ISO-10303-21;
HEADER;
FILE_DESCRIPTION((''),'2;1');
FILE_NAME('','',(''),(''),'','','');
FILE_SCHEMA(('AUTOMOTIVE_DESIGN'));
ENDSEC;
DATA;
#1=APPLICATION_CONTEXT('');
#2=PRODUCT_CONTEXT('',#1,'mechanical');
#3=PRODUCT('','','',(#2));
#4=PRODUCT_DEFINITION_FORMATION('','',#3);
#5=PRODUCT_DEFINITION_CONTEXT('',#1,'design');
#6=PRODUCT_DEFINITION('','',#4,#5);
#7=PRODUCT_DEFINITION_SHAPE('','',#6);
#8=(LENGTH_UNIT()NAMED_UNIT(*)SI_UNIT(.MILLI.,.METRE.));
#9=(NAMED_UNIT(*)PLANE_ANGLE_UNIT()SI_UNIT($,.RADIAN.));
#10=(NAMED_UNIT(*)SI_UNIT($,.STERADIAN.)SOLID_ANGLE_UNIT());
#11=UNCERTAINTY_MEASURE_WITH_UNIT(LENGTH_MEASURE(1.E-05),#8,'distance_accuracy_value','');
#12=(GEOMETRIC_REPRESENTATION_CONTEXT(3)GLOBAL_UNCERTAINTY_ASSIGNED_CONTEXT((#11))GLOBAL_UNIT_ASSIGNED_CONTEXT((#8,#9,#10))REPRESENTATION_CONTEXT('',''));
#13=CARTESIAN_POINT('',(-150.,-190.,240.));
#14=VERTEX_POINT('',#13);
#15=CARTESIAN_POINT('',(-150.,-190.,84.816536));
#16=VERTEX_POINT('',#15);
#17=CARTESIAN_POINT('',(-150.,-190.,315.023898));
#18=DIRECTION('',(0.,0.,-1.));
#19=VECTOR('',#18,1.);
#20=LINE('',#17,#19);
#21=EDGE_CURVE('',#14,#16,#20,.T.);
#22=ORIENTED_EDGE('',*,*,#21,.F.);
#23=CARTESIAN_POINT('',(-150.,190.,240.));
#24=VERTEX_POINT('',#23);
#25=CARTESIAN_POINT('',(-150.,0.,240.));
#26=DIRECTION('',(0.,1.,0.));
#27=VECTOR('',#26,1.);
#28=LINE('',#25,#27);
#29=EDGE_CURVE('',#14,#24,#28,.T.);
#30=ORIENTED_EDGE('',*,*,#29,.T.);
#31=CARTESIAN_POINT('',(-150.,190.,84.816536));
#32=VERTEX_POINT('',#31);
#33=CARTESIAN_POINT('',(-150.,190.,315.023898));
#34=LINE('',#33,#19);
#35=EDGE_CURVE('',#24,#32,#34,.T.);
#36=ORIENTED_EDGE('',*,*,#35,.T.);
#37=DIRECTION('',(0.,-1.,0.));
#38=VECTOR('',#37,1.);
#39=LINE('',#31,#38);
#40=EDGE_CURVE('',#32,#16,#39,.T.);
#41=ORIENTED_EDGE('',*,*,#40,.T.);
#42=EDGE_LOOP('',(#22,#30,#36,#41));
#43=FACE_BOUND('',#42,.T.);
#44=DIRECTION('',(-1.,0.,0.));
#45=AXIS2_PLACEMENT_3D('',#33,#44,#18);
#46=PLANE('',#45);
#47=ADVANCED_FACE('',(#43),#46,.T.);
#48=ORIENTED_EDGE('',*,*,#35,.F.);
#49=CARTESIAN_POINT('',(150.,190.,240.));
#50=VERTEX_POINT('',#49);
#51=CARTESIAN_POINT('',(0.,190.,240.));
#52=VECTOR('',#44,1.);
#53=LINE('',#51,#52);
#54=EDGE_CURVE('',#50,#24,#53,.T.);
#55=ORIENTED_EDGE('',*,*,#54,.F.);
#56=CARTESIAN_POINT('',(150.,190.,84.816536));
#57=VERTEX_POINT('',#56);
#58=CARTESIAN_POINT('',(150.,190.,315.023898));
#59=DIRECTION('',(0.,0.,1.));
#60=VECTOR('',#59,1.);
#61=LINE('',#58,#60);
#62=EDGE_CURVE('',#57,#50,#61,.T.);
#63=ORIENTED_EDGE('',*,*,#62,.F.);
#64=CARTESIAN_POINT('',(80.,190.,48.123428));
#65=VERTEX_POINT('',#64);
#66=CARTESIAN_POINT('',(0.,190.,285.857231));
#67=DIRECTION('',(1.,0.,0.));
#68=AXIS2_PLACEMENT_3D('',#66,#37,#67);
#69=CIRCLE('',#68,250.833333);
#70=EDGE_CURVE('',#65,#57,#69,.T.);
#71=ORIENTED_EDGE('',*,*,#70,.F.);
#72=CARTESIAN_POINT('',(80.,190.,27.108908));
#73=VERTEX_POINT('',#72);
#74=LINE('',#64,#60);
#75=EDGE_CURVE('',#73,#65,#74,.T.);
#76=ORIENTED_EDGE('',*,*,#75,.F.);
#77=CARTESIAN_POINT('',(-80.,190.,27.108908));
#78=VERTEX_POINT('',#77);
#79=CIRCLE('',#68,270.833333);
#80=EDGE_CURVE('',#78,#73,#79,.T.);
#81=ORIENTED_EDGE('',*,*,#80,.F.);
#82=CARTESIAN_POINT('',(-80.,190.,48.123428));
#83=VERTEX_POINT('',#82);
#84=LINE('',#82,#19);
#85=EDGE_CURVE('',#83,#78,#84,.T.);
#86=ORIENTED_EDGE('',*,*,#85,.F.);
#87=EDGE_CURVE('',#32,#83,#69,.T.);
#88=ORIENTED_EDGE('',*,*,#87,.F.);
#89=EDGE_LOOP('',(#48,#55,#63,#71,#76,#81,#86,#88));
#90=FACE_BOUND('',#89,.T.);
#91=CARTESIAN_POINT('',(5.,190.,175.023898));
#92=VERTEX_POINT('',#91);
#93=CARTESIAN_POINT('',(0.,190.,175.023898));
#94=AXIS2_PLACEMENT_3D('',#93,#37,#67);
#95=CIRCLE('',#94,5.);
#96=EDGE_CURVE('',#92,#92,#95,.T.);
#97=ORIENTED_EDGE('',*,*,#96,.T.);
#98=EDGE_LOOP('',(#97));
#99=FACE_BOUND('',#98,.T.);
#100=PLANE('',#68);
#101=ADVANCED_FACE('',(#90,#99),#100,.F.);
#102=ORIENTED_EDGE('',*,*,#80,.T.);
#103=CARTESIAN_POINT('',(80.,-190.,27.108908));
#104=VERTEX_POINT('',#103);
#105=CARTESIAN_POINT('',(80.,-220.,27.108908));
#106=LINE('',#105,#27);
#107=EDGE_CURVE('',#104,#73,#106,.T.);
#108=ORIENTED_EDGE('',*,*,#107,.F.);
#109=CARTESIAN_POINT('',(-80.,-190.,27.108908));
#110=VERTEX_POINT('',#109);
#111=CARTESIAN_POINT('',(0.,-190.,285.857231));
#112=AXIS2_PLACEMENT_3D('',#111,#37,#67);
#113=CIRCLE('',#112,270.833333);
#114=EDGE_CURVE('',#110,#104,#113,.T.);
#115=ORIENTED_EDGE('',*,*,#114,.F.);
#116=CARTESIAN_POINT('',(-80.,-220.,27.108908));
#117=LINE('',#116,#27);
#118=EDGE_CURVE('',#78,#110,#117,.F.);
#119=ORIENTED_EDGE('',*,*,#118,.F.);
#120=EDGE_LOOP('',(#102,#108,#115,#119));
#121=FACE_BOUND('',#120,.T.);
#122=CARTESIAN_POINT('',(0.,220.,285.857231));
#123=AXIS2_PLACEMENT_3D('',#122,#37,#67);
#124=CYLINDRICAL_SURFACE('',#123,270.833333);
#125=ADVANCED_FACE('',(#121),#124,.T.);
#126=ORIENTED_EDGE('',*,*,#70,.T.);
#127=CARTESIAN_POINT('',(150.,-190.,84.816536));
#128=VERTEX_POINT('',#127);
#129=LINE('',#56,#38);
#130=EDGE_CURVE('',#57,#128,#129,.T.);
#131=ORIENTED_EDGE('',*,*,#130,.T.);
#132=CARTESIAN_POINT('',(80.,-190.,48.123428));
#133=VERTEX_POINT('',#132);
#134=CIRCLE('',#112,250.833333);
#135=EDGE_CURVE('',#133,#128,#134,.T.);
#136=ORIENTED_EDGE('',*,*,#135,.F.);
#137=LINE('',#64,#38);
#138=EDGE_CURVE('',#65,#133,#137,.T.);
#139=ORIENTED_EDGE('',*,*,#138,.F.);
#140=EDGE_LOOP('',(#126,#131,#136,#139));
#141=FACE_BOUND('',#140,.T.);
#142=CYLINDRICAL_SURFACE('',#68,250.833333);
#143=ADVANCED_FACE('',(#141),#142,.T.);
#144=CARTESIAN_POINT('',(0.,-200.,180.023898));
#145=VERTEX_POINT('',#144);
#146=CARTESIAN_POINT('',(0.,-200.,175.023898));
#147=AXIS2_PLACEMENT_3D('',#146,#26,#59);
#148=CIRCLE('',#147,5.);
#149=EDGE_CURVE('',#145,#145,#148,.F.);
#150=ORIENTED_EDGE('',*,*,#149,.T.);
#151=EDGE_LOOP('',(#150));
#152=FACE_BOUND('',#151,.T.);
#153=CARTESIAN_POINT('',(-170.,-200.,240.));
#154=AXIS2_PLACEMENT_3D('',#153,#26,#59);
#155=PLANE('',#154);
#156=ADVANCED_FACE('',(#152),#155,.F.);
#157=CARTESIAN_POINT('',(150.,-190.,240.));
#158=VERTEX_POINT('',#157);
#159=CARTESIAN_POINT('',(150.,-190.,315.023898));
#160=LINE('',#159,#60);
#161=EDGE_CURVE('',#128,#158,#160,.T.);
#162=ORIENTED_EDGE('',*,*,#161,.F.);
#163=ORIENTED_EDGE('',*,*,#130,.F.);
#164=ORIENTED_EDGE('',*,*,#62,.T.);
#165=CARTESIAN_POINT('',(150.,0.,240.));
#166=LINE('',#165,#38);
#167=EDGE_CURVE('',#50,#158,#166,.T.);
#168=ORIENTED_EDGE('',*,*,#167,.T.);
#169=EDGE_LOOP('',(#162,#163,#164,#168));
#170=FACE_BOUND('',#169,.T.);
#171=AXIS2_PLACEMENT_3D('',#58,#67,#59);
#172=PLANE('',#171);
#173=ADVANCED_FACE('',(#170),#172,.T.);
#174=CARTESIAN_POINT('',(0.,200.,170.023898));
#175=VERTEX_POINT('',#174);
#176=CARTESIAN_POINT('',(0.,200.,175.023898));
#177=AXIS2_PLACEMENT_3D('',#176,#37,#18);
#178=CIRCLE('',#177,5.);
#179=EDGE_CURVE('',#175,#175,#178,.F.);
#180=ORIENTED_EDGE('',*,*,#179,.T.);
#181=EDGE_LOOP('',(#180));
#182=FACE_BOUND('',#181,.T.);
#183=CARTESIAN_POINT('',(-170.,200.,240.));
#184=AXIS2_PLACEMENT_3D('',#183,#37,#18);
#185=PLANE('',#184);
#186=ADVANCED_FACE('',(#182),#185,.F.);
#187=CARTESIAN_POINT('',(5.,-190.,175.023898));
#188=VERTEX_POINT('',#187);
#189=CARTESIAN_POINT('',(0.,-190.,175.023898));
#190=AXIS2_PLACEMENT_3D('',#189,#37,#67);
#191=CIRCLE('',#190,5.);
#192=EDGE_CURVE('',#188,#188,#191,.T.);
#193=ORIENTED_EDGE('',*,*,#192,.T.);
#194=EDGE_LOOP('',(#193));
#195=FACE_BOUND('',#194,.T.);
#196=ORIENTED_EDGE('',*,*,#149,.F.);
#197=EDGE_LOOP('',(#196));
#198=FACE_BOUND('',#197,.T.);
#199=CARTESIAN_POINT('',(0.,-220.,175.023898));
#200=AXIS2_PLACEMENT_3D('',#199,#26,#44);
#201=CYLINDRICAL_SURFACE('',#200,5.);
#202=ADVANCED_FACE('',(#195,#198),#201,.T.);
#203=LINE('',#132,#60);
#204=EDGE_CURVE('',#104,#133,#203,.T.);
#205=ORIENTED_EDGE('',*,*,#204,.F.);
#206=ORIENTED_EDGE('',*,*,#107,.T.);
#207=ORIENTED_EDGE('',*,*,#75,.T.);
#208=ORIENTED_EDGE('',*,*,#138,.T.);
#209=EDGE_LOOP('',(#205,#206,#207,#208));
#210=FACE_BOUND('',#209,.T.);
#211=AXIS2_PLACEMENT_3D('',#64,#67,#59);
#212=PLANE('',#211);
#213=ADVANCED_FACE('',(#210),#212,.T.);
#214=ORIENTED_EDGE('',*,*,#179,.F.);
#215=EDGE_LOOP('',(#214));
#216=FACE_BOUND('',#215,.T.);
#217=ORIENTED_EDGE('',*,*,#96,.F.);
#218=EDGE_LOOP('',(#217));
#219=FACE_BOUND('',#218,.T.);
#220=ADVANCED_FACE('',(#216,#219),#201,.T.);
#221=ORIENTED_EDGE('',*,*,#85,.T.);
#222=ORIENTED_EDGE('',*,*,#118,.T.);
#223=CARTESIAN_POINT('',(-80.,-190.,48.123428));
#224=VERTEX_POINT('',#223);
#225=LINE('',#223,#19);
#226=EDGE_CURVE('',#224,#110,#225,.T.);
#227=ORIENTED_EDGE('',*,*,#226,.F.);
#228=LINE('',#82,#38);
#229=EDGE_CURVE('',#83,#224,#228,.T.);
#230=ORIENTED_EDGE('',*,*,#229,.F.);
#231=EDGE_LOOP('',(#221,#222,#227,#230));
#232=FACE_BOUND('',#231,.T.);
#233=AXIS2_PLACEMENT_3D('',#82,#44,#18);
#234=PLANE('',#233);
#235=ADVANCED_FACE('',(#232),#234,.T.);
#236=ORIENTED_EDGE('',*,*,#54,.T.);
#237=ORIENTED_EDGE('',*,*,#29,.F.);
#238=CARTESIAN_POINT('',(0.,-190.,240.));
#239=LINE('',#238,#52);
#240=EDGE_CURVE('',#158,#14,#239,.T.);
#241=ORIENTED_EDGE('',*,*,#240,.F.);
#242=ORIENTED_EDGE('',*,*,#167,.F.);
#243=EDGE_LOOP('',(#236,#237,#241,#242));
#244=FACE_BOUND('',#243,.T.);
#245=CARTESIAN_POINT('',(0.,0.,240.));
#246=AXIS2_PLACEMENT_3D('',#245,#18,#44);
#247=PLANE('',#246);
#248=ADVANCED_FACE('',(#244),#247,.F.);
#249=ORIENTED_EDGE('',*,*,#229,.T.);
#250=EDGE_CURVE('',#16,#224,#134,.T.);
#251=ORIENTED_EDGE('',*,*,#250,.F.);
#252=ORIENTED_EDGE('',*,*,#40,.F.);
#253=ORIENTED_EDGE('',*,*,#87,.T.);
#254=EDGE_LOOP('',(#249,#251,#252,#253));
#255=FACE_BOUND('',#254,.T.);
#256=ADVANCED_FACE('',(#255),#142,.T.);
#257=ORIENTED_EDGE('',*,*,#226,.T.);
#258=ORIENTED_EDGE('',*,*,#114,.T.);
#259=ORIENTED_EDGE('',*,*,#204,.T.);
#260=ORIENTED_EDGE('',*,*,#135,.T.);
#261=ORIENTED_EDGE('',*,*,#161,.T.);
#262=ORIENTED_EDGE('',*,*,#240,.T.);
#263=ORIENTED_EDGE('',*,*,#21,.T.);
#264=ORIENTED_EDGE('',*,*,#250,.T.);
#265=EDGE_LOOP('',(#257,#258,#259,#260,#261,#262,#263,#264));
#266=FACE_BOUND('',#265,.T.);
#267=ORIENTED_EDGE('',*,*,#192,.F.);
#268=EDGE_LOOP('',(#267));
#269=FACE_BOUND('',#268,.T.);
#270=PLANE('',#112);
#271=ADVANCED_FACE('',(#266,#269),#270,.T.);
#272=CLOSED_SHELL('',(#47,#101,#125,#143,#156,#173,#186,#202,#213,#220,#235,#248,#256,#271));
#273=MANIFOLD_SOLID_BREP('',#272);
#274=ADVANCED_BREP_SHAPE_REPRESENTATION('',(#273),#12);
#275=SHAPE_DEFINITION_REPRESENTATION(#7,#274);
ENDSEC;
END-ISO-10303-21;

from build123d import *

# Parameters (mm, degrees)
SKETCH1_W           = 340
SKETCH1_H           = 400
BOSS_EXTRUDE1_DEPTH = 240
CAVITY2_START       = -200
CAVITY2_DEPTH       = 400
CAVITY2_2_OUTLINE_R = 5
CAVITY2_2_DEPTH     = 10
CAVITY2_START_2     = 190
CAVITY2_3_OUTLINE_R = 5
CAVITY2_3_DEPTH     = 10


# Read off the part's stored shape, not the designer's step: Cavity2
with BuildPart() as part:
    # Sketch1 → Boss-Extrude1 (new body)
    with BuildSketch(Plane.XY):
        Rectangle(SKETCH1_W, SKETCH1_H)
    extrude(amount=BOSS_EXTRUDE1_DEPTH)

    # Cavity2 outline → Cavity2 (cut)
    with BuildSketch(Plane(origin=(0, 0, 0), x_dir=(1, 0, 0), z_dir=(0, 1, 0)).offset(CAVITY2_START)):
        with BuildLine():
            Line((-80, -48.123427946), (-80, -27.108908401))
            ThreePointArc((-80, -27.108908401), (0, -15.02389766), (80, -27.108908401))
            Line((80, -27.108908401), (80, -48.123427946))
            ThreePointArc((80, -48.123427946), (116.45426588, -63.695656752), (150, -84.816535832))
            Line((150, -84.816535832), (150, -240))
            Line((150, -240), (170, -240))
            Line((170, -240), (170, 0))
            Line((170, 0), (-170, 0))
            Line((-170, 0), (-170, -240))
            Line((-170, -240), (-150, -240))
            Line((-150, -240), (-150, -84.816535832))
            ThreePointArc((-150, -84.816535832), (-116.45426588, -63.695656752), (-80, -48.123427946))
        make_face()
    extrude(amount=CAVITY2_DEPTH, mode=Mode.SUBTRACT)

    # Cavity2 2 outline → Cavity2 2 (cut)
    with BuildSketch(Plane(origin=(0, 0, 0), x_dir=(1, 0, 0), z_dir=(0, 1, 0)).offset(CAVITY2_START)):
        with BuildLine():
            ThreePointArc((80, -27.108908401), (0, -15.02389766), (-80, -27.108908401))
            Line((-80, -27.108908401), (-80, -48.123427946))
            ThreePointArc((-80, -48.123427946), (-116.45426588, -63.695656752), (-150, -84.816535832))
            Line((-150, -84.816535832), (-150, -240))
            Line((-150, -240), (150, -240))
            Line((150, -240), (150, -84.816535832))
            ThreePointArc((150, -84.816535832), (116.45426588, -63.695656752), (80, -48.123427946))
            Line((80, -48.123427946), (80, -27.108908401))
        make_face()
        with Locations((0, -175.02389766)):
            Circle(CAVITY2_2_OUTLINE_R, mode=Mode.SUBTRACT)
    extrude(amount=CAVITY2_2_DEPTH, mode=Mode.SUBTRACT)

    # Cavity2 3 outline → Cavity2 3 (cut)
    with BuildSketch(Plane(origin=(0, 0, 0), x_dir=(1, 0, 0), z_dir=(0, 1, 0)).offset(CAVITY2_START_2)):
        with BuildLine():
            ThreePointArc((80, -27.108908401), (0, -15.02389766), (-80, -27.108908401))
            Line((-80, -27.108908401), (-80, -48.123427946))
            ThreePointArc((-80, -48.123427946), (-116.45426588, -63.695656752), (-150, -84.816535832))
            Line((-150, -84.816535832), (-150, -240))
            Line((-150, -240), (150, -240))
            Line((150, -240), (150, -84.816535832))
            ThreePointArc((150, -84.816535832), (116.45426588, -63.695656752), (80, -48.123427946))
            Line((80, -48.123427946), (80, -27.108908401))
        make_face()
        with Locations((0, -175.02389766)):
            Circle(CAVITY2_3_OUTLINE_R, mode=Mode.SUBTRACT)
    extrude(amount=CAVITY2_3_DEPTH, mode=Mode.SUBTRACT)


solid = part.part
